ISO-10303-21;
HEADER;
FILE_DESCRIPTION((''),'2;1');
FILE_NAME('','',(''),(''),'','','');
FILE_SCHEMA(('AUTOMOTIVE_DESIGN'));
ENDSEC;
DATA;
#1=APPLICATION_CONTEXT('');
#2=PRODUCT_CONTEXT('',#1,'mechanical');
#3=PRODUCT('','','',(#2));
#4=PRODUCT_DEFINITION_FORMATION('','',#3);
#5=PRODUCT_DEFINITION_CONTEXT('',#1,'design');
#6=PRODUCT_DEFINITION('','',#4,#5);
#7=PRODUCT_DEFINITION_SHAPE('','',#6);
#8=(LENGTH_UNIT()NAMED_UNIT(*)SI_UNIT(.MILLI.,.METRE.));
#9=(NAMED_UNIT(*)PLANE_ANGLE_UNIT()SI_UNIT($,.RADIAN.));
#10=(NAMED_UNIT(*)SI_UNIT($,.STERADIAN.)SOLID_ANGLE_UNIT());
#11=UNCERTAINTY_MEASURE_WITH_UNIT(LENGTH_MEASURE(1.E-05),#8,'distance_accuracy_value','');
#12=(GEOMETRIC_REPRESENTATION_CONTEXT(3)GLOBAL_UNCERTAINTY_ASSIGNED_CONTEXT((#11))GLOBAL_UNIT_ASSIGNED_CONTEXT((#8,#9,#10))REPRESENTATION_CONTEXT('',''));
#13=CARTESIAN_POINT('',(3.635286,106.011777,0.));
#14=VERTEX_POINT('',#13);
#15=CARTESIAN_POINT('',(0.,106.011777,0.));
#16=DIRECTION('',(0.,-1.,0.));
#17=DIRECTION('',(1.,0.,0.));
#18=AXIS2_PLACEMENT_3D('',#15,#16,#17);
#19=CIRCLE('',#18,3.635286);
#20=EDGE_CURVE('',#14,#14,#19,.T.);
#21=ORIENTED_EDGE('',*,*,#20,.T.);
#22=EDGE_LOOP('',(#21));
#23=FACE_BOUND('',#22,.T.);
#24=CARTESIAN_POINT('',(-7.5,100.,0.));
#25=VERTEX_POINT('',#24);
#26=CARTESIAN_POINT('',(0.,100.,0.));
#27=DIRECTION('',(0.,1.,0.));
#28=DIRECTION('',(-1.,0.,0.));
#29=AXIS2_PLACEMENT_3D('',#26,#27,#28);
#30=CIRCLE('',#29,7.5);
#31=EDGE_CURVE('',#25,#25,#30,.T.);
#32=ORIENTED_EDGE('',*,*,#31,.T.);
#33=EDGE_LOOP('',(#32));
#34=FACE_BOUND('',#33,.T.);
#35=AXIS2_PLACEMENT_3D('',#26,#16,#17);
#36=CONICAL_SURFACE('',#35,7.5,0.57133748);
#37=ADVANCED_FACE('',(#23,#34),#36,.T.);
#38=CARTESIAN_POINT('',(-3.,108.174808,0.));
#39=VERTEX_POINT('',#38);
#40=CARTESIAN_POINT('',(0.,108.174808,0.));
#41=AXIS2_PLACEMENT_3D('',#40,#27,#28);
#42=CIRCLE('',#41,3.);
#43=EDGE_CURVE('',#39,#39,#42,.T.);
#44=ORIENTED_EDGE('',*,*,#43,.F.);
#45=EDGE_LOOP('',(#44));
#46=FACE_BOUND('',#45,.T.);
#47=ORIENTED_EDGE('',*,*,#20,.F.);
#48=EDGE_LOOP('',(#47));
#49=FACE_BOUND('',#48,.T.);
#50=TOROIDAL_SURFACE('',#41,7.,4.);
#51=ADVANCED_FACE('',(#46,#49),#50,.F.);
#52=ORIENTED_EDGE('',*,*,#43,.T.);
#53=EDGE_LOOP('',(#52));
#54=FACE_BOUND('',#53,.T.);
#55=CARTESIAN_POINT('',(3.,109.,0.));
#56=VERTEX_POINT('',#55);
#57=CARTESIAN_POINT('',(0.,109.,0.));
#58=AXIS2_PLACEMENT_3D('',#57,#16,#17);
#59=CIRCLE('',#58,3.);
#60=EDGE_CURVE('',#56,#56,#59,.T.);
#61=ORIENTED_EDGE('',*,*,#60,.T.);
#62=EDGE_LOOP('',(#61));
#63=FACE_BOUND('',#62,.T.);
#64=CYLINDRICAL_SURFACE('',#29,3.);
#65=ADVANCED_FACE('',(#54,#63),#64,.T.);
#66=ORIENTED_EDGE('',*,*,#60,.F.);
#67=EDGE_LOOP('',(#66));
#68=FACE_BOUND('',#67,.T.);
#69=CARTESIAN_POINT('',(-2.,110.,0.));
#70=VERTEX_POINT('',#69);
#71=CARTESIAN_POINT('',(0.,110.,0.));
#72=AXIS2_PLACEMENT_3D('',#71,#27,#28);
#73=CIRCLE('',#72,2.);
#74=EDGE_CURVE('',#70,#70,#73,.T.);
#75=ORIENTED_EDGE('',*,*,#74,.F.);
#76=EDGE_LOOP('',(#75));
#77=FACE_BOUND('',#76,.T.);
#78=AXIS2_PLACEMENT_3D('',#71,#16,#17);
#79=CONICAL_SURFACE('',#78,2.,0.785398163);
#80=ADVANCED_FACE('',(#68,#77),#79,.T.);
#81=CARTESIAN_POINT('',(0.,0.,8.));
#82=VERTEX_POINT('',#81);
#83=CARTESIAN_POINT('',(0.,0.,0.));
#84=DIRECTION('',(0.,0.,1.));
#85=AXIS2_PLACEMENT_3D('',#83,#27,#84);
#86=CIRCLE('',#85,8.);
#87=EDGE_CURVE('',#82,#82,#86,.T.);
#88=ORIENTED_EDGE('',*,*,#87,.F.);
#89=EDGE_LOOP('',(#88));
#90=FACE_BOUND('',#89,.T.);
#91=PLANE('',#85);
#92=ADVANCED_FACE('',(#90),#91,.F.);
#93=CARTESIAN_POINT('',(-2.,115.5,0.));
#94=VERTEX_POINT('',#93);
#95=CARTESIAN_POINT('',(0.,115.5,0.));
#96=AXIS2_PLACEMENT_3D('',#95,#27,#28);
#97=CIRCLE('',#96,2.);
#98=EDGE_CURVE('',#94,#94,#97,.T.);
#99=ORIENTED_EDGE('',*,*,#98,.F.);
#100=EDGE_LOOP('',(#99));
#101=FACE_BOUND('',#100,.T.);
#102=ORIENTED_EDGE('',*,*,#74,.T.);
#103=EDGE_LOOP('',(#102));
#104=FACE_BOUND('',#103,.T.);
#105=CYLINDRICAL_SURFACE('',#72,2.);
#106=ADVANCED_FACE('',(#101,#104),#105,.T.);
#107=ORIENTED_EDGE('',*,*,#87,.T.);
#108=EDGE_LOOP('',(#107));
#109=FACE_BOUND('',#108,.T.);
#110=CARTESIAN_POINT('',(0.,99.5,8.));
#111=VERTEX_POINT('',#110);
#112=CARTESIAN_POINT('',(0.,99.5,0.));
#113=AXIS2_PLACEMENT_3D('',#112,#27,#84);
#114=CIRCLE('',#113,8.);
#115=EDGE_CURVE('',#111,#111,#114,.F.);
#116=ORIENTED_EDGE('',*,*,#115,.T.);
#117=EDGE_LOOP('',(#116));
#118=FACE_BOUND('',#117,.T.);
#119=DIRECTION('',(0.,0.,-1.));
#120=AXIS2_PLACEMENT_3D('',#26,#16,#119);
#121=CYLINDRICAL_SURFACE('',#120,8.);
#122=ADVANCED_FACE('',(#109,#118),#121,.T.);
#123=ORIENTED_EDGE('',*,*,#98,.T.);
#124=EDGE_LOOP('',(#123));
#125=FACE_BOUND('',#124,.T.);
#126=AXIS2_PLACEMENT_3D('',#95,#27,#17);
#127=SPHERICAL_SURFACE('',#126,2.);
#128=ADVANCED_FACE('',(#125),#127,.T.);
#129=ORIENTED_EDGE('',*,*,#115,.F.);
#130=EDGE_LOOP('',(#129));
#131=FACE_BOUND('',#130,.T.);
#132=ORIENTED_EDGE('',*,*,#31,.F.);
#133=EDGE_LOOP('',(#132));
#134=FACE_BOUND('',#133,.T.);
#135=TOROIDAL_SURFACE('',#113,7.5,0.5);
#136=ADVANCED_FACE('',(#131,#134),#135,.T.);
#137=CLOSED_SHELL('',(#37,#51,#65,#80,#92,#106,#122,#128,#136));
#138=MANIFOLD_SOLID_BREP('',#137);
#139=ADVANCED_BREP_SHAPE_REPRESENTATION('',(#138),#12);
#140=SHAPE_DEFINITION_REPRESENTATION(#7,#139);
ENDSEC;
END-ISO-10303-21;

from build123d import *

# Parameters (mm, degrees)
SKETCH_1_R      = 8
EXTRUDE_1_DEPTH = 100
FILLET_1_R      = 0.5
FILLET_2_R      = 4
CHAMFER_1_SIZE  = 1


with BuildPart() as part:
    # 草图1 → 凸台-拉伸1 (new body)
    with BuildSketch(Plane(origin=(0, 0, 0), x_dir=(1, 0, 0), z_dir=(0, 1, 0))):
        with Locations(Location((0, 0, 0), (0, 0, 270))):
            Circle(SKETCH_1_R)
    extrude(amount=EXTRUDE_1_DEPTH)

    # 草图2 → 旋转1 (revolve)
    with BuildSketch(Plane.XY, mode=Mode.PRIVATE) as revolve_1_sk:
        Polygon((0, 100), (0, 110), (3, 110), (3, 107), (7.5, 100), align=None)
    revolve(revolve_1_sk.sketch.rotate(Axis((0, 100, 0), (0, -1, 0)), 180), axis=Axis((0, 100, 0), (0, -1, 0)))

    # 圆角1
    fillet_1_edges = [part.edges().sort_by_distance(p)[0] for p in [
        (0, 100, -8),
    ]]
    fillet(fillet_1_edges, radius=FILLET_1_R - 0.0001)  # a hair under: the kernel refuses the full size

    # 圆角2
    fillet_2_edges = [part.edges().sort_by_distance(p)[0] for p in [
        (3, 107, 0),
    ]]
    fillet(fillet_2_edges, radius=FILLET_2_R)

    # 草图3 → 旋转2 (revolve)
    with BuildSketch(Plane.XY, mode=Mode.PRIVATE) as revolve_2_sk:
        with BuildLine():
            Line((0, 110), (0, 117.5))
            ThreePointArc((0, 117.5), (1.414213562, 116.914213562), (2, 115.5))
            Line((2, 115.5), (2, 110))
            Line((2, 110), (0, 110))
        make_face()
    revolve(revolve_2_sk.sketch.rotate(Axis((0, 110, 0), (0, -1, 0)), 90), axis=Axis((0, 110, 0), (0, -1, 0)))

    # 倒角1
    chamfer_1_edges = [part.edges().sort_by_distance(p)[0] for p in [
        (3, 110, 0),
    ]]
    chamfer(chamfer_1_edges, length=CHAMFER_1_SIZE - 0.0001)  # a hair under: the kernel refuses the full size


solid = part.part
